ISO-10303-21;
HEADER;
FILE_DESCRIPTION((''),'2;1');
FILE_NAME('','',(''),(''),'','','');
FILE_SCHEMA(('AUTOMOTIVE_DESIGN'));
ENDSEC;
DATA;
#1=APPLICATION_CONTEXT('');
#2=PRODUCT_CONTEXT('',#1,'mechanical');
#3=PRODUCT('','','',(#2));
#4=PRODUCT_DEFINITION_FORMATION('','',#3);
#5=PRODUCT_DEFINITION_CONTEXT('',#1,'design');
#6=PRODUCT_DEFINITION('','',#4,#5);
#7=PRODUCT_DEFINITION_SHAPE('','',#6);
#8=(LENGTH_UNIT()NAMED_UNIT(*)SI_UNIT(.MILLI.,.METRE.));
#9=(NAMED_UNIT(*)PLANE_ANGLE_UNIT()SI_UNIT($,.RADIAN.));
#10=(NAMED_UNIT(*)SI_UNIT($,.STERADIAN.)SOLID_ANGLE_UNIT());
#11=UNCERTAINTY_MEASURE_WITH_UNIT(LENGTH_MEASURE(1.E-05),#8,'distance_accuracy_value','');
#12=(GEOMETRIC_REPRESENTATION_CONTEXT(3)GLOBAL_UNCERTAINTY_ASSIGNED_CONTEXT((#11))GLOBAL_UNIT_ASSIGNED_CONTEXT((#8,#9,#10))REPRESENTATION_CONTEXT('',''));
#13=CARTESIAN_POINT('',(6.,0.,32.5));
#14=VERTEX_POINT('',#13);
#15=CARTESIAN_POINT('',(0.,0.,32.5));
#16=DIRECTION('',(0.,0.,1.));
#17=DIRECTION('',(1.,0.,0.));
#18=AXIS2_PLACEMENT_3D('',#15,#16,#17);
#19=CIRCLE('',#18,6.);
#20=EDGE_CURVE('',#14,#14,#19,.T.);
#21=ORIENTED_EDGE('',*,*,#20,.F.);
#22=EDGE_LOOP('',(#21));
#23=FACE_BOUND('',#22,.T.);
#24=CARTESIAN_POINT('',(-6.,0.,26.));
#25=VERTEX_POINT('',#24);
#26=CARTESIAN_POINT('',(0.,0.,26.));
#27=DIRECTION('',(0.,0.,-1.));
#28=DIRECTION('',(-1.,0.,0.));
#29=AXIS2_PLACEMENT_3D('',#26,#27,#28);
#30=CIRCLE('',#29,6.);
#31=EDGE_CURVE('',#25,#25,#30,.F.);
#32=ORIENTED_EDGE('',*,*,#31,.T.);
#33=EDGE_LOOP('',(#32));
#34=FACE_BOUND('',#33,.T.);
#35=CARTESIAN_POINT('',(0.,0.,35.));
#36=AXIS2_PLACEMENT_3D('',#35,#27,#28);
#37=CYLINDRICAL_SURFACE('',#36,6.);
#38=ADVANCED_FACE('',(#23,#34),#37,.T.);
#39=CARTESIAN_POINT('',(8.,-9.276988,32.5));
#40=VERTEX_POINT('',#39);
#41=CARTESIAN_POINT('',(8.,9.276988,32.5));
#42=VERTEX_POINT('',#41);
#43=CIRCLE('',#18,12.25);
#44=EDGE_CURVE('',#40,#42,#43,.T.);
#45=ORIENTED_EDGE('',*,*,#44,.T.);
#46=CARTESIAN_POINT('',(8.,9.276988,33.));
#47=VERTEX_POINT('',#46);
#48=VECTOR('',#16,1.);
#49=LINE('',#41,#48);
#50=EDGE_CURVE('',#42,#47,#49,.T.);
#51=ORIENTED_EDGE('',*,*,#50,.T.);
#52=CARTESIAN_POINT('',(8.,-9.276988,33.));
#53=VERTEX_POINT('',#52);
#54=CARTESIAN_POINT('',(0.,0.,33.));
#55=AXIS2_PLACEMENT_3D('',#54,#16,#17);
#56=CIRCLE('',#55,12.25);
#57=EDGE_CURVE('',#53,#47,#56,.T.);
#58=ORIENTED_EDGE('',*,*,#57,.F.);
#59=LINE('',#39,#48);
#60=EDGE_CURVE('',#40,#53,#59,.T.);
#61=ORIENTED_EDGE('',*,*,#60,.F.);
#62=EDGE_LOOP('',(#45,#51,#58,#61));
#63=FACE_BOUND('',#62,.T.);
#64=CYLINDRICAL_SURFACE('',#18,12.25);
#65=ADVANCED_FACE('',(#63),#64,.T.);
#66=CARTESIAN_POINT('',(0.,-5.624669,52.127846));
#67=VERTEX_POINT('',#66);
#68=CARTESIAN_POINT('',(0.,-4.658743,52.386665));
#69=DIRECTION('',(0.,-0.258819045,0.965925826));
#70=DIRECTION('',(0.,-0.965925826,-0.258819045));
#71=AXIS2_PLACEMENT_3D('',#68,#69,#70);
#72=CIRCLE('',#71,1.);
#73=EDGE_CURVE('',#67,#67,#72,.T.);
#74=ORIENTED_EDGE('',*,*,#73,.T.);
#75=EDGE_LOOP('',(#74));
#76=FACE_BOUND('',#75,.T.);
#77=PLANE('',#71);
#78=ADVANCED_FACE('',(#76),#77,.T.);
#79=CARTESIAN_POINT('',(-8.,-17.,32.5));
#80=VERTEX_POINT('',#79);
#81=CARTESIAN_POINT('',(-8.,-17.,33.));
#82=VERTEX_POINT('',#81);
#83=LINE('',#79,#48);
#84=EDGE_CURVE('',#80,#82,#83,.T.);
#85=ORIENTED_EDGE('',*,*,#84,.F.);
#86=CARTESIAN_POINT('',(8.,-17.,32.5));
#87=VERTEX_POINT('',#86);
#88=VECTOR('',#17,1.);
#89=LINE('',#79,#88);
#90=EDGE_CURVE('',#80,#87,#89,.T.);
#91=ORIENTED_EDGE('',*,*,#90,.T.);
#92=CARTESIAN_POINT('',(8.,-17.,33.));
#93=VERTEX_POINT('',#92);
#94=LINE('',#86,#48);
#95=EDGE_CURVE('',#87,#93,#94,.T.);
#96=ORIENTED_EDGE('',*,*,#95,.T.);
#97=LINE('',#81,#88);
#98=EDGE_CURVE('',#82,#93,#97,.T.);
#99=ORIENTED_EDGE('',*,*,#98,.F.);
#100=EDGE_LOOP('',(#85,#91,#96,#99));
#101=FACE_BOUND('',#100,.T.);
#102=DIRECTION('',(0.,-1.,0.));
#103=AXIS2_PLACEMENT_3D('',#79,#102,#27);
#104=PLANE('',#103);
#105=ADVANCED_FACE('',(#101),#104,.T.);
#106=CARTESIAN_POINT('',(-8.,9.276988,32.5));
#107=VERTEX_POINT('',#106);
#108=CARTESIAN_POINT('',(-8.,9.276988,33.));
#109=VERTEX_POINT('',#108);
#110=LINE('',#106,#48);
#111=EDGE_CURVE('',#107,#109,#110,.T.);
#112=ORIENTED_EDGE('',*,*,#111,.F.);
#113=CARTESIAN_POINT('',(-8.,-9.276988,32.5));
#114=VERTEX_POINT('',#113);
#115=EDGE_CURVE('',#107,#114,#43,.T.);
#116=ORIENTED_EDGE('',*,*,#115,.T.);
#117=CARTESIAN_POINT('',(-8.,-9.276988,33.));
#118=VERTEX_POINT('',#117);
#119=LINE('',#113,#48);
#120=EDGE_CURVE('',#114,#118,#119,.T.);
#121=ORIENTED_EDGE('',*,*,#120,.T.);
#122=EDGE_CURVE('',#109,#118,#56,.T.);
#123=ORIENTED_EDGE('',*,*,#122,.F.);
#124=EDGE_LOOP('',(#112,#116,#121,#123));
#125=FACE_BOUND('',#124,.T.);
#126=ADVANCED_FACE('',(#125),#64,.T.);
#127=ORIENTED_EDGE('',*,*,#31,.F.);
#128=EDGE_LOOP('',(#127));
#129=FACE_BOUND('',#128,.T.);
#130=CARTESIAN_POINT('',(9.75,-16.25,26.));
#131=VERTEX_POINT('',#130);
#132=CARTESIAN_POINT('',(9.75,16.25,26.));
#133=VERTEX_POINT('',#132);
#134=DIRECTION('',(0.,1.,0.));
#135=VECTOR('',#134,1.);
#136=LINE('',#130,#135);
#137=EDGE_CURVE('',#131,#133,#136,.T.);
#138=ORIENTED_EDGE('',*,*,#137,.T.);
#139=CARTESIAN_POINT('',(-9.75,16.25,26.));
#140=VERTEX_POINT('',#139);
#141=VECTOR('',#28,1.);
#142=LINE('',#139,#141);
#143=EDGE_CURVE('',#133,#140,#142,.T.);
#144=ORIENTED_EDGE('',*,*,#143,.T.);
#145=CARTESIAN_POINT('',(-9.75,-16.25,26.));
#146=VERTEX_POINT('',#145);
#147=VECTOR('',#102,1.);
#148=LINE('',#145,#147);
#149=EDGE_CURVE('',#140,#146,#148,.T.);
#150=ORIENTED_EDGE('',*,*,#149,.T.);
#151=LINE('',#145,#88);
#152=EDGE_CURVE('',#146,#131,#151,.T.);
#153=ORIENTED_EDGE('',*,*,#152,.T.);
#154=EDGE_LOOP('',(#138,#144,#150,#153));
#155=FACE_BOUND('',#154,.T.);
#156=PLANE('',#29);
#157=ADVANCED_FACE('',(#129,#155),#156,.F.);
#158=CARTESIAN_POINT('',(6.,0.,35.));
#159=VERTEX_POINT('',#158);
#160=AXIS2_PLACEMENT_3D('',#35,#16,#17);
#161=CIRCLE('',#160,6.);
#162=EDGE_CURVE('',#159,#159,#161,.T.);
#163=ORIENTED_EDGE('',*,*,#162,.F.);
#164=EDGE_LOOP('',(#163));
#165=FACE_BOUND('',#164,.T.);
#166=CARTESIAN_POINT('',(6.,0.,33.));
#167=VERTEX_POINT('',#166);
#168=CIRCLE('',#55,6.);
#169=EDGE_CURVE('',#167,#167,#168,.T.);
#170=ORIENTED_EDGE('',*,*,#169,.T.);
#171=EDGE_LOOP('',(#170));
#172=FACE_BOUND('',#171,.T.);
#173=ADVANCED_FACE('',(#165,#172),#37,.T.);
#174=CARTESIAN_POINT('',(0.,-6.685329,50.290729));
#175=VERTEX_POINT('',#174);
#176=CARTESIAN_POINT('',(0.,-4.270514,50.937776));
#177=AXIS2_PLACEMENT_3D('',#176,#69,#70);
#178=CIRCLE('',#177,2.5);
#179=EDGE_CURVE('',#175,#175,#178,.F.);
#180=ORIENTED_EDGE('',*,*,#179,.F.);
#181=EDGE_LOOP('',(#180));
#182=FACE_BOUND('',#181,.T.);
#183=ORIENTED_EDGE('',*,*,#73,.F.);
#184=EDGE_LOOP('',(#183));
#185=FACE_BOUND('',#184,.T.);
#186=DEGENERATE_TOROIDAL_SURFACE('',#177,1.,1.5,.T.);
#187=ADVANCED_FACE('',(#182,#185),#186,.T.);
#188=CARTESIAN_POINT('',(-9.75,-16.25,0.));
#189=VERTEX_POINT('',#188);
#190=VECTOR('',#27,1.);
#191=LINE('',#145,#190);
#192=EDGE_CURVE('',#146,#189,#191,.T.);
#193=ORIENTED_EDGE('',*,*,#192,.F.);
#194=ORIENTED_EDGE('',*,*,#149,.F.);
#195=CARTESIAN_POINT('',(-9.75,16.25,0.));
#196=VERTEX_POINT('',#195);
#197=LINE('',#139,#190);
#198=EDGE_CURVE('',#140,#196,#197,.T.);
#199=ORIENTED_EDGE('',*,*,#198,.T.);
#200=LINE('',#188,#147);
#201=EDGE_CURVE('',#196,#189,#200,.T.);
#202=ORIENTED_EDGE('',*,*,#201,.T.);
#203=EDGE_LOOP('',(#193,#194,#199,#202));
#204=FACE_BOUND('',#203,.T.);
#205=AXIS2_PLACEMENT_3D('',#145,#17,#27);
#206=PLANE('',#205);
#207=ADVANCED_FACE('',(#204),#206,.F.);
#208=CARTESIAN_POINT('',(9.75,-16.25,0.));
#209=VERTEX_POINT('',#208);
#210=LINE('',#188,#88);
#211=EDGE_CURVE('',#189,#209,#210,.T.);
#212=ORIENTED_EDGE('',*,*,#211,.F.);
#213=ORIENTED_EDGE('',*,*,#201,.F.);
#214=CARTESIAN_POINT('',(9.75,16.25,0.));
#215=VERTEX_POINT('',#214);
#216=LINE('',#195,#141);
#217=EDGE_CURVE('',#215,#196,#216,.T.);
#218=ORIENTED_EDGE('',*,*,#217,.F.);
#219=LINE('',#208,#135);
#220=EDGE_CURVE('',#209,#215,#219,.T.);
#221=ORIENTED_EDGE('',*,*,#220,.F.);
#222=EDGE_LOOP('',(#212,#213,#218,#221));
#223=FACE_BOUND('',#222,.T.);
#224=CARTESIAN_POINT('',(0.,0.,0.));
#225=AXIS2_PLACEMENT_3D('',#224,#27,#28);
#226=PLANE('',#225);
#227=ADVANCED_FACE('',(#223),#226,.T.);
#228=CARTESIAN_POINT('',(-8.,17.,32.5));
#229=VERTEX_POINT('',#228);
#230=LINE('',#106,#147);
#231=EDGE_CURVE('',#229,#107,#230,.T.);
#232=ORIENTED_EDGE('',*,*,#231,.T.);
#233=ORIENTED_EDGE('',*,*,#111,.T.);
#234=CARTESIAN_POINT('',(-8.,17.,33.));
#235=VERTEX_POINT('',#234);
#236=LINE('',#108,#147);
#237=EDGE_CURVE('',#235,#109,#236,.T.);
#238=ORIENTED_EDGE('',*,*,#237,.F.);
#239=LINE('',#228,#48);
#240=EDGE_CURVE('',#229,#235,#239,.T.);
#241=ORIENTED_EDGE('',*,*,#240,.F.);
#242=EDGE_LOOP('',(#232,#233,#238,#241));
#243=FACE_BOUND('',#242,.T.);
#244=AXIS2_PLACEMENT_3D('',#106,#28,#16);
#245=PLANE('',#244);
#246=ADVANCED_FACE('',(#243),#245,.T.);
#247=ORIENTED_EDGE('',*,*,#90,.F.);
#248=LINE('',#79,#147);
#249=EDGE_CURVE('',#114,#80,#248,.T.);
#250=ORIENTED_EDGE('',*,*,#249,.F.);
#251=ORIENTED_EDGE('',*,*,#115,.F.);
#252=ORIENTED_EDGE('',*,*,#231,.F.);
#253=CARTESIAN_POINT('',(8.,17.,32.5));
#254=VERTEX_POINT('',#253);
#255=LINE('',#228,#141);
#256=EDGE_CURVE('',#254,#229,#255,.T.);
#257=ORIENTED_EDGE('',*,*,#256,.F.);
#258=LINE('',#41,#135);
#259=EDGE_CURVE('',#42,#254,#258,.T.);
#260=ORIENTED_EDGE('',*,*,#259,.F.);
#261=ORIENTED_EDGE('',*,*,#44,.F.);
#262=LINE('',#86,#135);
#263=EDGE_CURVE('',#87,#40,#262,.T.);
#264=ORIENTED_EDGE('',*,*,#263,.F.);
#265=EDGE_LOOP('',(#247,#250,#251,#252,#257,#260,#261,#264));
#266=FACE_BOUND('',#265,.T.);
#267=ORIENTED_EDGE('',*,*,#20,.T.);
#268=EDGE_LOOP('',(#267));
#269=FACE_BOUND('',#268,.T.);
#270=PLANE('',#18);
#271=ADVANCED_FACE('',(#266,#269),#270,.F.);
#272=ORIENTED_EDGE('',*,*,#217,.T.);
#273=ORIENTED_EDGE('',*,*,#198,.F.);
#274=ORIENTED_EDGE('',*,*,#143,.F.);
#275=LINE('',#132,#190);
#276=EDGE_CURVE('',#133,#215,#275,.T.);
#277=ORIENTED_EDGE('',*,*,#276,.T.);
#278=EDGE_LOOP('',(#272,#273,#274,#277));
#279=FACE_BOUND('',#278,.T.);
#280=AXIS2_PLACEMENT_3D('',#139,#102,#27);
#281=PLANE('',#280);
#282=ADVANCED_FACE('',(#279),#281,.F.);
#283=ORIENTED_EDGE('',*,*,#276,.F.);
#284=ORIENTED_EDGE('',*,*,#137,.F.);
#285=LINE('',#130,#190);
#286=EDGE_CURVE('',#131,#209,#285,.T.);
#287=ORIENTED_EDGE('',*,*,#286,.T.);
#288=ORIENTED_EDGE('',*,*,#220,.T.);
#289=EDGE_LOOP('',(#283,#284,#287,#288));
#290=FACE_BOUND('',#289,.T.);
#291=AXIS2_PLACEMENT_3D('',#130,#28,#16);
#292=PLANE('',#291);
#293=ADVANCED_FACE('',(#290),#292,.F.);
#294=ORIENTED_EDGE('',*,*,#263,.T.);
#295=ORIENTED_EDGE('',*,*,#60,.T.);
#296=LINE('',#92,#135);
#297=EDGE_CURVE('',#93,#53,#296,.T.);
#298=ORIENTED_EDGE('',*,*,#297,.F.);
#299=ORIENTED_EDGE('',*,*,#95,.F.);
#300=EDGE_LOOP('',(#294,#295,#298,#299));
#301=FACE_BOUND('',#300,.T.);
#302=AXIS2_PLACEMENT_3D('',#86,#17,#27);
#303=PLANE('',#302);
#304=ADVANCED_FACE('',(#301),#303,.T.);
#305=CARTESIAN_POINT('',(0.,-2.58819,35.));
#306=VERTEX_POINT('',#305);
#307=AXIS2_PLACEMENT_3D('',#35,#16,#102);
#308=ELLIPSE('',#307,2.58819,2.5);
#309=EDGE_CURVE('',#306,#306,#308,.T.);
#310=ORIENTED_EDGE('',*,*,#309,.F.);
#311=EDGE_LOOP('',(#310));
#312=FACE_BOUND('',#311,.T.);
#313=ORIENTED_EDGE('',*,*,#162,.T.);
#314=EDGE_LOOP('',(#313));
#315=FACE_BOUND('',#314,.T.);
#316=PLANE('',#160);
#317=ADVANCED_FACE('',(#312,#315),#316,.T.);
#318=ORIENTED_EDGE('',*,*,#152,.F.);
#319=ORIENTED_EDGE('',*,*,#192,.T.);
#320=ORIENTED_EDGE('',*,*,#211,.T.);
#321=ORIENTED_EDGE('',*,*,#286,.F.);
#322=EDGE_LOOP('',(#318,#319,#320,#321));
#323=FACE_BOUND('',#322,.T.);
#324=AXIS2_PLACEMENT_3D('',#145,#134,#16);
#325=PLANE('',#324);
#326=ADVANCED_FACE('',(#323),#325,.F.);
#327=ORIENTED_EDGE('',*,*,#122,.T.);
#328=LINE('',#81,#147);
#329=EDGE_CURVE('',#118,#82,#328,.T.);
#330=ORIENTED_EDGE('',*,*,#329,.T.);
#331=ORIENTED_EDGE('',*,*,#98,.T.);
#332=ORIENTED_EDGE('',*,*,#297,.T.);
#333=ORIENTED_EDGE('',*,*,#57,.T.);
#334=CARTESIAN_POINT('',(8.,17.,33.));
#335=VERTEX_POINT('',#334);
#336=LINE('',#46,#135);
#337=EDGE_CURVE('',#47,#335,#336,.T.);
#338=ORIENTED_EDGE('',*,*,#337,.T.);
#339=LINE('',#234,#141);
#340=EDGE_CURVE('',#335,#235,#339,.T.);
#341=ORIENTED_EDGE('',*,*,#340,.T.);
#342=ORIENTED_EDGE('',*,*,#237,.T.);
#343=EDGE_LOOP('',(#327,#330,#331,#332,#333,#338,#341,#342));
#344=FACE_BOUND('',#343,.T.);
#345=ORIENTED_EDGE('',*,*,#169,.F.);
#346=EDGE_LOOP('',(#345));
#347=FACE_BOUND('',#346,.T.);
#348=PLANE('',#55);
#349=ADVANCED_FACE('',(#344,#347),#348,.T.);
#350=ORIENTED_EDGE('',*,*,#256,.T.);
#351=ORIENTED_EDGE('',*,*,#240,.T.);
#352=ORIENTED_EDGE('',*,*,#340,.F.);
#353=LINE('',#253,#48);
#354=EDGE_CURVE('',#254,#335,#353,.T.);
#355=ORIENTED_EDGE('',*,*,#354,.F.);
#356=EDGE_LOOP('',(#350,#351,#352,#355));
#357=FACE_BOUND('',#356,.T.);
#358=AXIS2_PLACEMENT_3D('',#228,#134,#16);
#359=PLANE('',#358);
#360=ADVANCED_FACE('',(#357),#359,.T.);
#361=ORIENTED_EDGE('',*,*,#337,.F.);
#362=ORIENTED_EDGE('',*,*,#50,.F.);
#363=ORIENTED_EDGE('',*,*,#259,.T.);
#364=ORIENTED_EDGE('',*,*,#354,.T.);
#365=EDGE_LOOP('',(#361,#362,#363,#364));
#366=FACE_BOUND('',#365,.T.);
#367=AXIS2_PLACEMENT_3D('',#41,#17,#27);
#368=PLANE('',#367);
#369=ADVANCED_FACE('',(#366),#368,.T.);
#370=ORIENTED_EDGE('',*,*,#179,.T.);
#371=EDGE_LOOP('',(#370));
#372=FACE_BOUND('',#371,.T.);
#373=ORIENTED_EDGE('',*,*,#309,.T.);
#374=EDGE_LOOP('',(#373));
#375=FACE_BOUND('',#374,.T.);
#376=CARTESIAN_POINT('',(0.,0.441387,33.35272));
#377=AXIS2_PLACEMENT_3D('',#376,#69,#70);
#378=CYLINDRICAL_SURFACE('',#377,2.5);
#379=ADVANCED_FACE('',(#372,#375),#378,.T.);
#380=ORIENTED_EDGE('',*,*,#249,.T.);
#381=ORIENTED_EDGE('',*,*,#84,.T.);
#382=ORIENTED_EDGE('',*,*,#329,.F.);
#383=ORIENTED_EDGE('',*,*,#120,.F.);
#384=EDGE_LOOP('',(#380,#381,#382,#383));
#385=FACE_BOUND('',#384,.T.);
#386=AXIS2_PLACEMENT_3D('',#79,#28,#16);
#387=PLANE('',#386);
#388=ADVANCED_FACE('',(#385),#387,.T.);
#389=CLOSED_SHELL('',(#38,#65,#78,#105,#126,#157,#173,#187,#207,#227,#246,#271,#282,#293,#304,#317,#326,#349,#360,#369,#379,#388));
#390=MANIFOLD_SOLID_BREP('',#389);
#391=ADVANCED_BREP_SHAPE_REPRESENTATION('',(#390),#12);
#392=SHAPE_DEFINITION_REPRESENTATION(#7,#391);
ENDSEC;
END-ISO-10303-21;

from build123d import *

# Parameters (mm, degrees)
SKETCH1_W           = 19.5
SKETCH1_H           = 32.5
BOSS_EXTRUDE1_DEPTH = 26
SKETCH2_R           = 6
BOSS_EXTRUDE2_DEPTH = 9
BOSS_EXTRUDE3_START = -2
BOSS_EXTRUDE3_DEPTH = 0.5
SWEEP1_OUTLINE_W    = 2.5
SWEEP1_OUTLINE_H    = 18.679041634
FILLET1_R           = 1.5


# Read off the part's stored shape, not the designer's step: Sweep1
with BuildPart() as part:
    # Sketch1 → Boss-Extrude1 (new body)
    with BuildSketch(Plane.XY):
        Rectangle(SKETCH1_W, SKETCH1_H)
    extrude(amount=BOSS_EXTRUDE1_DEPTH)

    # Sketch2 → Boss-Extrude2 (add)
    with BuildSketch(Plane.XY.offset(26)):
        with Locations(Location((0, 0, 0), (0, 0, 180))):
            Circle(SKETCH2_R)
    extrude(amount=BOSS_EXTRUDE2_DEPTH)

    # Sketch3 → Boss-Extrude3 (add)
    with BuildSketch(Plane.XY.offset(35).offset(BOSS_EXTRUDE3_START)):
        with BuildLine():
            Line((8, 9.276987658), (8, 17))
            Line((8, 17), (-8, 17))
            Line((-8, 17), (-8, 9.276987658))
            ThreePointArc((-8, 9.276987658), (-12.25, 0), (-8, -9.276987658))
            Line((-8, -9.276987658), (-8, -17))
            Line((-8, -17), (8, -17))
            Line((8, -17), (8, -9.276987658))
            ThreePointArc((8, -9.276987658), (12.25, 0), (8, 9.276987658))
        make_face()
    extrude(amount=-BOSS_EXTRUDE3_DEPTH)

    # Sweep1 outline → Sweep1 (revolve)
    with BuildSketch(Plane(origin=(0, 8.75, 2.344555434), x_dir=(1, 0, 0), z_dir=(0, 0.965925826289068, 0.258819045102522))):
        with Locations((1.25, -42.467883103)):
            Rectangle(SWEEP1_OUTLINE_W, SWEEP1_OUTLINE_H)
    revolve(axis=Axis((0, 8.75, 2.344555434), (0, 0.258819045102522, -0.965925826289068)))

    # Fillet1
    fillet1_edges = [part.edges().sort_by_distance(p)[0] for p in [
        (-2.5, -4.658742812, 52.386664873),
    ]]
    fillet(fillet1_edges, radius=FILLET1_R)


solid = part.part
